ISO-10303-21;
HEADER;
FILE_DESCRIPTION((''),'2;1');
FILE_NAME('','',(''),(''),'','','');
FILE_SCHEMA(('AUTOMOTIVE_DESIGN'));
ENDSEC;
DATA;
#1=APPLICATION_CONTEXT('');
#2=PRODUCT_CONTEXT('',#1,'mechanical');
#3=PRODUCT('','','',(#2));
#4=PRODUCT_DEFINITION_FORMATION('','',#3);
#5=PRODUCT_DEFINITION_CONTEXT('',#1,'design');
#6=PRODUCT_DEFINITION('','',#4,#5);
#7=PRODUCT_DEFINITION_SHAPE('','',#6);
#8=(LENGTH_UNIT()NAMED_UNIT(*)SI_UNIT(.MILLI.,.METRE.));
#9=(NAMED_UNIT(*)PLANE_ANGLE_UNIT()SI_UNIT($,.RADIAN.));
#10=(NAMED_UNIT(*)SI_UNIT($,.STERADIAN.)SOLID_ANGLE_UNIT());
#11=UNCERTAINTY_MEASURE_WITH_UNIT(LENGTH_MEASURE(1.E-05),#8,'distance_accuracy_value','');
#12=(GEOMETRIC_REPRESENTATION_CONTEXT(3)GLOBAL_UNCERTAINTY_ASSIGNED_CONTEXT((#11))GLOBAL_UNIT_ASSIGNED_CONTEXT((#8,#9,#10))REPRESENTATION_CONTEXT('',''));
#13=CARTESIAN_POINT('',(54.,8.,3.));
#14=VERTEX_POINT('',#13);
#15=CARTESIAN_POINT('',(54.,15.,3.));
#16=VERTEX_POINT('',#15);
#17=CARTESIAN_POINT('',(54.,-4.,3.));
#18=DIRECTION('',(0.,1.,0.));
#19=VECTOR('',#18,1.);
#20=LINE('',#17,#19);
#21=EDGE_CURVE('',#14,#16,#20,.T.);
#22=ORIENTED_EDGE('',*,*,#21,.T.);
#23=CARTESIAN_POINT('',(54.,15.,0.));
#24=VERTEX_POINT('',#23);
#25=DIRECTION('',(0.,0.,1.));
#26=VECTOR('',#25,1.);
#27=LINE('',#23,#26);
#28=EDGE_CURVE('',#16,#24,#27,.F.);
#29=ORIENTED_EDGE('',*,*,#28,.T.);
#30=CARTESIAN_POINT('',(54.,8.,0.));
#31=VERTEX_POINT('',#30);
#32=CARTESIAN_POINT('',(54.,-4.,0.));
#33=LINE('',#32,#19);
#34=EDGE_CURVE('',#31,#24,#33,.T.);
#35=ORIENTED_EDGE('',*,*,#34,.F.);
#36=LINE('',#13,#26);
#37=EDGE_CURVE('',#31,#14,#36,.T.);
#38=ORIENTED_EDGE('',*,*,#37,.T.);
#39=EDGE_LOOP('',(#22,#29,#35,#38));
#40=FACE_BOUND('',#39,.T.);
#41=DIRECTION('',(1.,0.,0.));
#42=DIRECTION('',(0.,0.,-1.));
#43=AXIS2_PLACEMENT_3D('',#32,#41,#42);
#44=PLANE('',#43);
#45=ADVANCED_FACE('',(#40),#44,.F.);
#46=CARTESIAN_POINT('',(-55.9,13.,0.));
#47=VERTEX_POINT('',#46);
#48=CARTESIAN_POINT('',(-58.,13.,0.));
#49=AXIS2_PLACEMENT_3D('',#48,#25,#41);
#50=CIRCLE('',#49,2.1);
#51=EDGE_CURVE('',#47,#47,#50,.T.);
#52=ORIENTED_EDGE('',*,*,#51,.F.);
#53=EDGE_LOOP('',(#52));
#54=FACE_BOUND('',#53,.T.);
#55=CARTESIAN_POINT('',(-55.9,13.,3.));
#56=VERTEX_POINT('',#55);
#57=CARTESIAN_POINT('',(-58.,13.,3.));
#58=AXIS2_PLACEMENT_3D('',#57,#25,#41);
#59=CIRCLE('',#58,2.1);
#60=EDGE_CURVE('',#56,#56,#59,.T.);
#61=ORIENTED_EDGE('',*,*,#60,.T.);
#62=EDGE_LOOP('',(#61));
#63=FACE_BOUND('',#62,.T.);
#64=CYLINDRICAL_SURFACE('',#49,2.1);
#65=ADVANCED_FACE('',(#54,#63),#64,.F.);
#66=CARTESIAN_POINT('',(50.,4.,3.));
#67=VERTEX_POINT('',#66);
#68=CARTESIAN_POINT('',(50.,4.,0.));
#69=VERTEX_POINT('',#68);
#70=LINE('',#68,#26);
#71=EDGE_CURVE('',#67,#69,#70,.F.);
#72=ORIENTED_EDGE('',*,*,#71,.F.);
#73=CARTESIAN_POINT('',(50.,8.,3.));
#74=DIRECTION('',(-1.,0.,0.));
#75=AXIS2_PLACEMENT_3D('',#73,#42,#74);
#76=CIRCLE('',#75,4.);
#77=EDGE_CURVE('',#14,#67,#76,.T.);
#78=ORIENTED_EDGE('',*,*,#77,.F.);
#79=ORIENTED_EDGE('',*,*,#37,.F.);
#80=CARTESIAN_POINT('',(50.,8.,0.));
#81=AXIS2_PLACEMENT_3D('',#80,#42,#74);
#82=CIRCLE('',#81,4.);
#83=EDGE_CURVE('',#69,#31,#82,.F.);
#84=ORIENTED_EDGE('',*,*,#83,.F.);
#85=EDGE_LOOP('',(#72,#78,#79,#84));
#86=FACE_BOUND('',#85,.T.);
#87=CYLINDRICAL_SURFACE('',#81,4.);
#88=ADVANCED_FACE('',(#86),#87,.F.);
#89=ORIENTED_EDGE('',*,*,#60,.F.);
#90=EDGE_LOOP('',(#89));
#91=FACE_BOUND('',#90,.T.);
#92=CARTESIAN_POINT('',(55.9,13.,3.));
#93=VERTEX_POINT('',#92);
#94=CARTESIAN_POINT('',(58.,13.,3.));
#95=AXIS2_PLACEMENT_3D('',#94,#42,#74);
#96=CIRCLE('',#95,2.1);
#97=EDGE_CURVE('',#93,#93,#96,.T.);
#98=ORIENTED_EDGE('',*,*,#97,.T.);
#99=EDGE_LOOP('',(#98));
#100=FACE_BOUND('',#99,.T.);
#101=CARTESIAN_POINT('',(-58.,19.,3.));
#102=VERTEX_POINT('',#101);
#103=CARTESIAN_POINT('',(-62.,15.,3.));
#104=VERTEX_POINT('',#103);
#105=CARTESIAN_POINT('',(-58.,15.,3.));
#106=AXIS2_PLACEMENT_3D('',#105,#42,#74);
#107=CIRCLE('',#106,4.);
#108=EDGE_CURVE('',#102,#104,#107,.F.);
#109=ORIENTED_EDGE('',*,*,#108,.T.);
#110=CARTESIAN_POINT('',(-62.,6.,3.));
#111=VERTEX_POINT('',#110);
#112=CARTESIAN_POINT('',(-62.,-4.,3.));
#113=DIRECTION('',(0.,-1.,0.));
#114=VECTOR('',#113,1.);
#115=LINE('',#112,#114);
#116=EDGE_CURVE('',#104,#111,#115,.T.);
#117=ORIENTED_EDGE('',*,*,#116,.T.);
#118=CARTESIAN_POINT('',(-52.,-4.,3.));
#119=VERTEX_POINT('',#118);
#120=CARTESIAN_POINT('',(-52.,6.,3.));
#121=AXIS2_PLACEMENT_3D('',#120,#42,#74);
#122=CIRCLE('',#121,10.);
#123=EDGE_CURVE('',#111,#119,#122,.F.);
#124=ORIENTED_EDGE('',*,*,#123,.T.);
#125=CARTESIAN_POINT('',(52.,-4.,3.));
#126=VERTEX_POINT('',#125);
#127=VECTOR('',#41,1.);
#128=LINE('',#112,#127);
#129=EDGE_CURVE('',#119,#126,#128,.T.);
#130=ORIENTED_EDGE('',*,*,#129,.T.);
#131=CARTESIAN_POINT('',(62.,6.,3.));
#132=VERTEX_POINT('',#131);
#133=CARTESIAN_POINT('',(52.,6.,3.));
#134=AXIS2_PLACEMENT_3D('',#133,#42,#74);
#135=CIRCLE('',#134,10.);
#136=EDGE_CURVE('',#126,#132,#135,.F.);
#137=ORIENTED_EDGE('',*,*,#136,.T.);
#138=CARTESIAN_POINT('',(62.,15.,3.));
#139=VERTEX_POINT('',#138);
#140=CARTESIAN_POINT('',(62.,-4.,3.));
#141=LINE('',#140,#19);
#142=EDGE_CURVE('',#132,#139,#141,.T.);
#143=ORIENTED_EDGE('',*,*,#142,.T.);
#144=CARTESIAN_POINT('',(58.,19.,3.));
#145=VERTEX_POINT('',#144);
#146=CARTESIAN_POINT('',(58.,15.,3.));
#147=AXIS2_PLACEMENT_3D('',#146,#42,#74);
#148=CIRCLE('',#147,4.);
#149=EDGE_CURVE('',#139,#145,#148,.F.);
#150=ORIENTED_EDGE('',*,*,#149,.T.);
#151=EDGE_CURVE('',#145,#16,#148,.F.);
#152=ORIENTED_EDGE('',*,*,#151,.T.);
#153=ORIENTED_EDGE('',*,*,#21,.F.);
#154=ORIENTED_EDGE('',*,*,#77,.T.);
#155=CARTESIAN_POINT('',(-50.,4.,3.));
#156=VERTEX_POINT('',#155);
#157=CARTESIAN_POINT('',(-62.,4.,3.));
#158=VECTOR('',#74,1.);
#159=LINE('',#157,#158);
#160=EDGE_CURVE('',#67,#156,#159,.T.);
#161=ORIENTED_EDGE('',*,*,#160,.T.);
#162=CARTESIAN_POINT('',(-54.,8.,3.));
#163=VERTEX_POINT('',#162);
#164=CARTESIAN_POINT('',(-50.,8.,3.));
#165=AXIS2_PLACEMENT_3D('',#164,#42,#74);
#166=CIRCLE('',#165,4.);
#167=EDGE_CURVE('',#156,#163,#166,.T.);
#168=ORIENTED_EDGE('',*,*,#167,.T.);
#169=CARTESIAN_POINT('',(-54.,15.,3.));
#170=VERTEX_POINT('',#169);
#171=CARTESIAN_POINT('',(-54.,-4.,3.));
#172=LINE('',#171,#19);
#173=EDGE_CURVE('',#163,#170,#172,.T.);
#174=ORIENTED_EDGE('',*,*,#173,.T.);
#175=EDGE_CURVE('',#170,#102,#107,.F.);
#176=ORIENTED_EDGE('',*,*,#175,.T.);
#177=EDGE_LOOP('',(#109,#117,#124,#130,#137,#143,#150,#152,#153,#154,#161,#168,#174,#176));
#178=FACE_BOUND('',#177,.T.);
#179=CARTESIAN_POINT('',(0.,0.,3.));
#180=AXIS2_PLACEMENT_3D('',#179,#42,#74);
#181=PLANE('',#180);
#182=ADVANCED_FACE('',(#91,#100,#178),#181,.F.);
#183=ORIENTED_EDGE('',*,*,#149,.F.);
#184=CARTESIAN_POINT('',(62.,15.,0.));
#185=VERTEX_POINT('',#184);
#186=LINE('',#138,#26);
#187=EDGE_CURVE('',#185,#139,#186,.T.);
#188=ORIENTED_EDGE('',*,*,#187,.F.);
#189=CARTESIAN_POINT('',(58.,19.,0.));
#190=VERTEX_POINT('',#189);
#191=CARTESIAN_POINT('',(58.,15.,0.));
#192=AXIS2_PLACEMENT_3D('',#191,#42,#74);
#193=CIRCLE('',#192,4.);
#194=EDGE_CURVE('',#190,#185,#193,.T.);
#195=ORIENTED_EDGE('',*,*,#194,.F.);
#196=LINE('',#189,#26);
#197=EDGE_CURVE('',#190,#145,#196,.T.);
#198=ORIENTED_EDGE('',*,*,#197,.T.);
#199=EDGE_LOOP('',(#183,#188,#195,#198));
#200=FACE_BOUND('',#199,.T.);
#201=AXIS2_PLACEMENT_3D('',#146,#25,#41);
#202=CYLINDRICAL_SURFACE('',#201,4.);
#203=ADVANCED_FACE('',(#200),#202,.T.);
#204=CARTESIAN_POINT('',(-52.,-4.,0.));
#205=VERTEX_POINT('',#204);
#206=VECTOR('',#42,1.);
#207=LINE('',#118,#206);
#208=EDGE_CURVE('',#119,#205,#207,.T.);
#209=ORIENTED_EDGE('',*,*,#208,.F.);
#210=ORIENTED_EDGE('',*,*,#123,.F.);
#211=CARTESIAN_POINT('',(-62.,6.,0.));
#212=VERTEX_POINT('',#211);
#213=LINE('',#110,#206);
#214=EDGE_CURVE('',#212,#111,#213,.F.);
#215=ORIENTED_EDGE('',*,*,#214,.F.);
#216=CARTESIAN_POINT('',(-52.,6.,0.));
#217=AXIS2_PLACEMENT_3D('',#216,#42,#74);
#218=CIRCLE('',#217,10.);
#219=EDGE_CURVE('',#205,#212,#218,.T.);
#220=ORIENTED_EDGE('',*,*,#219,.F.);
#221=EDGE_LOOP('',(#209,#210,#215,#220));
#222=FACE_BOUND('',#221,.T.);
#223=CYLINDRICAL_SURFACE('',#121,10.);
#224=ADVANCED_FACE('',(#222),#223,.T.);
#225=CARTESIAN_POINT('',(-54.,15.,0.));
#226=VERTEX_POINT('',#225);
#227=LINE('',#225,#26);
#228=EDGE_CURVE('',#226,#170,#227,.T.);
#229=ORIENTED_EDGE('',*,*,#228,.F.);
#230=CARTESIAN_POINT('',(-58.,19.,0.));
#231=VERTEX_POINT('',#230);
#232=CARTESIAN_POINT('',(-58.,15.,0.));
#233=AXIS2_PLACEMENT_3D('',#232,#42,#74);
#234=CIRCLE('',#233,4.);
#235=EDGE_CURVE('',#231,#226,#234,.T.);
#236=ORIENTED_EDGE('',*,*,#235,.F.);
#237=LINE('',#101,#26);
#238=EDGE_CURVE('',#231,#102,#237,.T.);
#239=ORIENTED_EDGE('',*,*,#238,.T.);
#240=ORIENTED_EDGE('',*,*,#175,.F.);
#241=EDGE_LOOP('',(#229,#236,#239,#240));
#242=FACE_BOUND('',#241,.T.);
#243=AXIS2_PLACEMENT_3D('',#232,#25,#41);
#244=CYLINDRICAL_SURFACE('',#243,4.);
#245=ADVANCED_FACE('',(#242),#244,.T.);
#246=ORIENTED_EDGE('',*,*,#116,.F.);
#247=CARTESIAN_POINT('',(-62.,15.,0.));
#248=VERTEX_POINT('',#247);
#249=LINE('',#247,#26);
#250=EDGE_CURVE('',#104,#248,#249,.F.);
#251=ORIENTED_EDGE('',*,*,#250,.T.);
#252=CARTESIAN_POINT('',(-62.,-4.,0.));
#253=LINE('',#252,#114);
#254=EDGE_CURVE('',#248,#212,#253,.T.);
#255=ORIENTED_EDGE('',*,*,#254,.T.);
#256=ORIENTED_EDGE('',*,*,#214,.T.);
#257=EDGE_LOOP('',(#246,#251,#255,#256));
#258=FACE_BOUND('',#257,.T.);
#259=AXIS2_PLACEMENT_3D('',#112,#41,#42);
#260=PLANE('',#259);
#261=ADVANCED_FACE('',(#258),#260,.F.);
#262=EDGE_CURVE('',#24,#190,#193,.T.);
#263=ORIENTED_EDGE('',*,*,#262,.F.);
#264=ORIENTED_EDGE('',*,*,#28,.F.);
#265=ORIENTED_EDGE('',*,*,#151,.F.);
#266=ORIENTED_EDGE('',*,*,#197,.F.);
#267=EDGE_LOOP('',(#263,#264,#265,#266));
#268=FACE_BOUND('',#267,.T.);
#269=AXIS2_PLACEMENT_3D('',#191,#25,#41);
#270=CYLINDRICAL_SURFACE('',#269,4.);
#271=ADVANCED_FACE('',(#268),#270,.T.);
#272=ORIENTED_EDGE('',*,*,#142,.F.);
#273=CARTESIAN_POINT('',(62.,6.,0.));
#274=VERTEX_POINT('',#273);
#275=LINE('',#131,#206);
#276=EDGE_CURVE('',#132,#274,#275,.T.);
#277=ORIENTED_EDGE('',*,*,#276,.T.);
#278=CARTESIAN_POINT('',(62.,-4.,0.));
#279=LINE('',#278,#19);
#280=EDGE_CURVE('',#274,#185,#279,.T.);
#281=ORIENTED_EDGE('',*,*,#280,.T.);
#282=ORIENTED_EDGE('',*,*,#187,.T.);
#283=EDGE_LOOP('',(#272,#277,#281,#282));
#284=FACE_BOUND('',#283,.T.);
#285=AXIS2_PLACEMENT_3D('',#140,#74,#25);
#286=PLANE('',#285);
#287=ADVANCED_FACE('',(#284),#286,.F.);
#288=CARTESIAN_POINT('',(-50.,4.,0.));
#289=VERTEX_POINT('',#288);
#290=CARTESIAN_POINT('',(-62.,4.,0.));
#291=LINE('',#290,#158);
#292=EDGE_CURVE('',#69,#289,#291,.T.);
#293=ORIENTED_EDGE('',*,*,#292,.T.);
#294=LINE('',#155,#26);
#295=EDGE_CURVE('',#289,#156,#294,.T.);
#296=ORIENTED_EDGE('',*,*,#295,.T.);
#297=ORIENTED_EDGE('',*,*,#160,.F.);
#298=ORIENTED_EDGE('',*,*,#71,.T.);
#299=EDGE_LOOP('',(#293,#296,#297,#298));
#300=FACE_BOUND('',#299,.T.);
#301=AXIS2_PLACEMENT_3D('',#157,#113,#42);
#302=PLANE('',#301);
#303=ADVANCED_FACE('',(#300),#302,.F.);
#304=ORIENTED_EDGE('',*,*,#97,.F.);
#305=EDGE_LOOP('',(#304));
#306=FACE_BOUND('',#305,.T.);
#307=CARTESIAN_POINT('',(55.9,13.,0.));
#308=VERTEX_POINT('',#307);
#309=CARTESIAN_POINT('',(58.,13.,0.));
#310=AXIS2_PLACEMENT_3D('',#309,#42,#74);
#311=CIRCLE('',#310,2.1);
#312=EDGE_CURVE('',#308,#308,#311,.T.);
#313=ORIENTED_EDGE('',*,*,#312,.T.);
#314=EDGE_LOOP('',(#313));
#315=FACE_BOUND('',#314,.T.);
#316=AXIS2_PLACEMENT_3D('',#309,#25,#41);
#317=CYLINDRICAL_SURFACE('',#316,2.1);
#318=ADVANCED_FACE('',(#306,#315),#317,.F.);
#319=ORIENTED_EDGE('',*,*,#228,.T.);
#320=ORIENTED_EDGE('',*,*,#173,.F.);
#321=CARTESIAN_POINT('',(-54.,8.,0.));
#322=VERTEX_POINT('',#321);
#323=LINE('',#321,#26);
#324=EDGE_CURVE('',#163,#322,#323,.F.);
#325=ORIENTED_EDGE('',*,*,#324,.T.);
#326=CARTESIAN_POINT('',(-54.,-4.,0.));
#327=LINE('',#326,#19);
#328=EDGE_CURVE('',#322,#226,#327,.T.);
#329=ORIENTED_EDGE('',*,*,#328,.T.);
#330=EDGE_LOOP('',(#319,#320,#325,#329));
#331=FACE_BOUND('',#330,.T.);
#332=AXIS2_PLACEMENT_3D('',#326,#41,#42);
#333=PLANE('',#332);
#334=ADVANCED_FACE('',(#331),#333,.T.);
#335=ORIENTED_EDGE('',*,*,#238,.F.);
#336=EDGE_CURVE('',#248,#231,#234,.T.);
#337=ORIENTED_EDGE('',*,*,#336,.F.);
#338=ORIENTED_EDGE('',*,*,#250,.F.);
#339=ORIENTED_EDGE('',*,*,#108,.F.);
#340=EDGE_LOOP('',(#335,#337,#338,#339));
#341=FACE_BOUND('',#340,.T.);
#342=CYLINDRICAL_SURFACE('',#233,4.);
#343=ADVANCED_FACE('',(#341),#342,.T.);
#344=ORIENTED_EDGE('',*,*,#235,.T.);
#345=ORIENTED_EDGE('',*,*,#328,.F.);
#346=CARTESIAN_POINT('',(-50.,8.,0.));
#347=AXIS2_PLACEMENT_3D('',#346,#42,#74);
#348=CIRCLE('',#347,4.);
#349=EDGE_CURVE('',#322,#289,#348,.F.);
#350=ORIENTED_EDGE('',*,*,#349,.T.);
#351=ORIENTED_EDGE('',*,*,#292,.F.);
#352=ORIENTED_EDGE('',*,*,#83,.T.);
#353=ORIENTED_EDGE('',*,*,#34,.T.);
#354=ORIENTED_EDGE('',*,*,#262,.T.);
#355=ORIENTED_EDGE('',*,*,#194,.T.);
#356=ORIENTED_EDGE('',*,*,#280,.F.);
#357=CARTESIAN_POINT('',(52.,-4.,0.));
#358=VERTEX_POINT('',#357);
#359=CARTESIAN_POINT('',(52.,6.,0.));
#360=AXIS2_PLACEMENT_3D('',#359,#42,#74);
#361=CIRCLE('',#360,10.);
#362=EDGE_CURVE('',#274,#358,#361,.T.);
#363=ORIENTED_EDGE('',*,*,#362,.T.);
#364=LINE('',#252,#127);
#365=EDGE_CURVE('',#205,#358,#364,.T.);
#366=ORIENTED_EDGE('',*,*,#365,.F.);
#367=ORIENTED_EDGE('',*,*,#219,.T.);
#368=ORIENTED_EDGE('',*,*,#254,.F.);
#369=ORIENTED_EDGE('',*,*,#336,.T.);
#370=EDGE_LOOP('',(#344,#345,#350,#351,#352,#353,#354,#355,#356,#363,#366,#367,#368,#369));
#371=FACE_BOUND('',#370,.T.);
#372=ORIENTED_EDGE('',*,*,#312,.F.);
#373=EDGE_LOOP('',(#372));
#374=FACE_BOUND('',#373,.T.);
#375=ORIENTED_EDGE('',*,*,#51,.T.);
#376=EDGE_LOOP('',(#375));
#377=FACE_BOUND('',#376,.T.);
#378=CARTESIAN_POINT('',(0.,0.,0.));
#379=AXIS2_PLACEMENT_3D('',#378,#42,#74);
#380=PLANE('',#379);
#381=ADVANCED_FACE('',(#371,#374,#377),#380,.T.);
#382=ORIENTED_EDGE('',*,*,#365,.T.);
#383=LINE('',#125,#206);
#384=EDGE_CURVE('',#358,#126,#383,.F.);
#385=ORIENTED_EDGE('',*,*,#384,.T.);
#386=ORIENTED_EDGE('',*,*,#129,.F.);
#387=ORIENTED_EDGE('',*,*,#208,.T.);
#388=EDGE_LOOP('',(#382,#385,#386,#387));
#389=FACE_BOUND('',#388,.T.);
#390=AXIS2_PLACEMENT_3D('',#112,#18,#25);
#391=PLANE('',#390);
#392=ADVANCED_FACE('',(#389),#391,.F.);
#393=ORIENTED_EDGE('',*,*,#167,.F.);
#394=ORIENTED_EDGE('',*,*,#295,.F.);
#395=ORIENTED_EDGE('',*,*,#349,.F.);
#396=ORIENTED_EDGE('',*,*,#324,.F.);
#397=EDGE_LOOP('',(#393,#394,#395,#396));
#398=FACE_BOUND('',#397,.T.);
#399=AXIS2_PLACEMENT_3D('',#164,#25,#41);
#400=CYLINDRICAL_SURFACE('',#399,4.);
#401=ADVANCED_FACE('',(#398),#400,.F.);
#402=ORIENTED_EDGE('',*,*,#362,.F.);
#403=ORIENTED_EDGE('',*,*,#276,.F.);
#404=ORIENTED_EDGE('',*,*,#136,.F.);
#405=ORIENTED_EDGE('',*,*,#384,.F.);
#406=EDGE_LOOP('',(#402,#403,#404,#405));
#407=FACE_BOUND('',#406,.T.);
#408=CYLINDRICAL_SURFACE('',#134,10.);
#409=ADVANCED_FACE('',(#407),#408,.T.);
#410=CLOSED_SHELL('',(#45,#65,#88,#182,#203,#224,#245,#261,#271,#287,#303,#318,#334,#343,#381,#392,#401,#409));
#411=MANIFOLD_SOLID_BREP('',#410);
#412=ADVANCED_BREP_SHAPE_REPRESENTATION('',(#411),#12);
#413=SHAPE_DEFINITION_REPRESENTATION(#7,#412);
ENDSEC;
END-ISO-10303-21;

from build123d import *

# Parameters (mm, degrees)
SKETCH_1_W          = 124
SKETCH_1_H          = 8
EXTRUDE_1_DEPTH     = 3
SKETCH_2_W          = 8
SKETCH_2_H          = 23
EXTRUDE_2_DEPTH     = 3
SKETCH_3_R          = 2.1
CUT_EXTRUDE_1_DEPTH = 65.915329468
FILLET_1_R          = 10
FILLET_2_R          = 4


with BuildPart() as part:
    # 草圖1 → 填料-伸長1 (new body)
    with BuildSketch(Plane.XY):
        Rectangle(SKETCH_1_W, SKETCH_1_H)
    extrude(amount=EXTRUDE_1_DEPTH)

    # 草圖2 → 填料-伸長2 (add)
    with BuildSketch(Plane.XY.offset(3)):
        with Locations((-58, 7.5)):
            Rectangle(SKETCH_2_W, SKETCH_2_H)
    extrude_2 = extrude(amount=-EXTRUDE_2_DEPTH)

    # 草圖3 → 除料-伸長1 (cut, through all)
    with BuildSketch(Plane.XY.offset(3)):
        with Locations((-58, 13)):
            Circle(SKETCH_3_R)
    cut_extrude_1 = extrude(amount=-CUT_EXTRUDE_1_DEPTH, mode=Mode.SUBTRACT)

    # 鏡射1: 填料-伸長2, 除料-伸長1 across plane
    add(extrude_2.mirror(Plane(origin=(0, 0, 0), x_dir=(0, 0, 1), z_dir=(1, 0, 0))))
    add(cut_extrude_1.mirror(Plane(origin=(0, 0, 0), x_dir=(0, 0, 1), z_dir=(1, 0, 0))), mode=Mode.SUBTRACT)

    # 圓角1
    fillet_1_edges = [part.edges().sort_by_distance(p)[0] for p in [
        (62, -4, 1.5),
        (-62, -4, 1.5),
    ]]
    fillet(fillet_1_edges, radius=FILLET_1_R)

    # 圓角2
    # the kernel refuses this fillet: 4 mm, written as the material it adds along each edge
    with BuildSketch(Plane(origin=(-54, 4, 0), x_dir=(0, 1, 0), z_dir=(0, 0, 1)), Plane(origin=(54, 4, 0), x_dir=(-1, 0, 0), z_dir=(0, 0, 1))) as fillet_2_piece_1:
        with BuildLine():
            CenterArc((FILLET_2_R, -FILLET_2_R), FILLET_2_R, 90, 90)
            Line((0, -FILLET_2_R), (0, 0))
            Line((0, 0), (FILLET_2_R, 0))
        make_face()
    extrude(amount=3)
    # the kernel refuses this fillet: 4 mm, written as the material it takes off along each edge
    with BuildSketch(Plane(origin=(62, 19, 13), x_dir=(0, -1, 0), z_dir=(0, 0, -1))) as fillet_2_2_piece_1:
        with BuildLine():
            CenterArc((FILLET_2_R, FILLET_2_R), FILLET_2_R, 180, 90)
            Line((0, FILLET_2_R), (0, 0))
            Line((0, 0), (FILLET_2_R, 0))
        make_face()
    extrude(amount=23, mode=Mode.SUBTRACT)
    with BuildSketch(Plane(origin=(54, 19, 13), x_dir=(0, -1, 0), z_dir=(0, 0, -1)), Plane(origin=(-54, 19, 13), x_dir=(-1, 0, 0), z_dir=(0, 0, -1)), Plane(origin=(-62, 19, 13), x_dir=(0, -1, 0), z_dir=(0, 0, -1))) as fillet_2_2_piece_2:
        with BuildLine():
            CenterArc((FILLET_2_R, -FILLET_2_R), FILLET_2_R, 90, 90)
            Line((0, -FILLET_2_R), (0, 0))
            Line((0, 0), (FILLET_2_R, 0))
        make_face()
    extrude(amount=23, mode=Mode.SUBTRACT)


solid = part.part
